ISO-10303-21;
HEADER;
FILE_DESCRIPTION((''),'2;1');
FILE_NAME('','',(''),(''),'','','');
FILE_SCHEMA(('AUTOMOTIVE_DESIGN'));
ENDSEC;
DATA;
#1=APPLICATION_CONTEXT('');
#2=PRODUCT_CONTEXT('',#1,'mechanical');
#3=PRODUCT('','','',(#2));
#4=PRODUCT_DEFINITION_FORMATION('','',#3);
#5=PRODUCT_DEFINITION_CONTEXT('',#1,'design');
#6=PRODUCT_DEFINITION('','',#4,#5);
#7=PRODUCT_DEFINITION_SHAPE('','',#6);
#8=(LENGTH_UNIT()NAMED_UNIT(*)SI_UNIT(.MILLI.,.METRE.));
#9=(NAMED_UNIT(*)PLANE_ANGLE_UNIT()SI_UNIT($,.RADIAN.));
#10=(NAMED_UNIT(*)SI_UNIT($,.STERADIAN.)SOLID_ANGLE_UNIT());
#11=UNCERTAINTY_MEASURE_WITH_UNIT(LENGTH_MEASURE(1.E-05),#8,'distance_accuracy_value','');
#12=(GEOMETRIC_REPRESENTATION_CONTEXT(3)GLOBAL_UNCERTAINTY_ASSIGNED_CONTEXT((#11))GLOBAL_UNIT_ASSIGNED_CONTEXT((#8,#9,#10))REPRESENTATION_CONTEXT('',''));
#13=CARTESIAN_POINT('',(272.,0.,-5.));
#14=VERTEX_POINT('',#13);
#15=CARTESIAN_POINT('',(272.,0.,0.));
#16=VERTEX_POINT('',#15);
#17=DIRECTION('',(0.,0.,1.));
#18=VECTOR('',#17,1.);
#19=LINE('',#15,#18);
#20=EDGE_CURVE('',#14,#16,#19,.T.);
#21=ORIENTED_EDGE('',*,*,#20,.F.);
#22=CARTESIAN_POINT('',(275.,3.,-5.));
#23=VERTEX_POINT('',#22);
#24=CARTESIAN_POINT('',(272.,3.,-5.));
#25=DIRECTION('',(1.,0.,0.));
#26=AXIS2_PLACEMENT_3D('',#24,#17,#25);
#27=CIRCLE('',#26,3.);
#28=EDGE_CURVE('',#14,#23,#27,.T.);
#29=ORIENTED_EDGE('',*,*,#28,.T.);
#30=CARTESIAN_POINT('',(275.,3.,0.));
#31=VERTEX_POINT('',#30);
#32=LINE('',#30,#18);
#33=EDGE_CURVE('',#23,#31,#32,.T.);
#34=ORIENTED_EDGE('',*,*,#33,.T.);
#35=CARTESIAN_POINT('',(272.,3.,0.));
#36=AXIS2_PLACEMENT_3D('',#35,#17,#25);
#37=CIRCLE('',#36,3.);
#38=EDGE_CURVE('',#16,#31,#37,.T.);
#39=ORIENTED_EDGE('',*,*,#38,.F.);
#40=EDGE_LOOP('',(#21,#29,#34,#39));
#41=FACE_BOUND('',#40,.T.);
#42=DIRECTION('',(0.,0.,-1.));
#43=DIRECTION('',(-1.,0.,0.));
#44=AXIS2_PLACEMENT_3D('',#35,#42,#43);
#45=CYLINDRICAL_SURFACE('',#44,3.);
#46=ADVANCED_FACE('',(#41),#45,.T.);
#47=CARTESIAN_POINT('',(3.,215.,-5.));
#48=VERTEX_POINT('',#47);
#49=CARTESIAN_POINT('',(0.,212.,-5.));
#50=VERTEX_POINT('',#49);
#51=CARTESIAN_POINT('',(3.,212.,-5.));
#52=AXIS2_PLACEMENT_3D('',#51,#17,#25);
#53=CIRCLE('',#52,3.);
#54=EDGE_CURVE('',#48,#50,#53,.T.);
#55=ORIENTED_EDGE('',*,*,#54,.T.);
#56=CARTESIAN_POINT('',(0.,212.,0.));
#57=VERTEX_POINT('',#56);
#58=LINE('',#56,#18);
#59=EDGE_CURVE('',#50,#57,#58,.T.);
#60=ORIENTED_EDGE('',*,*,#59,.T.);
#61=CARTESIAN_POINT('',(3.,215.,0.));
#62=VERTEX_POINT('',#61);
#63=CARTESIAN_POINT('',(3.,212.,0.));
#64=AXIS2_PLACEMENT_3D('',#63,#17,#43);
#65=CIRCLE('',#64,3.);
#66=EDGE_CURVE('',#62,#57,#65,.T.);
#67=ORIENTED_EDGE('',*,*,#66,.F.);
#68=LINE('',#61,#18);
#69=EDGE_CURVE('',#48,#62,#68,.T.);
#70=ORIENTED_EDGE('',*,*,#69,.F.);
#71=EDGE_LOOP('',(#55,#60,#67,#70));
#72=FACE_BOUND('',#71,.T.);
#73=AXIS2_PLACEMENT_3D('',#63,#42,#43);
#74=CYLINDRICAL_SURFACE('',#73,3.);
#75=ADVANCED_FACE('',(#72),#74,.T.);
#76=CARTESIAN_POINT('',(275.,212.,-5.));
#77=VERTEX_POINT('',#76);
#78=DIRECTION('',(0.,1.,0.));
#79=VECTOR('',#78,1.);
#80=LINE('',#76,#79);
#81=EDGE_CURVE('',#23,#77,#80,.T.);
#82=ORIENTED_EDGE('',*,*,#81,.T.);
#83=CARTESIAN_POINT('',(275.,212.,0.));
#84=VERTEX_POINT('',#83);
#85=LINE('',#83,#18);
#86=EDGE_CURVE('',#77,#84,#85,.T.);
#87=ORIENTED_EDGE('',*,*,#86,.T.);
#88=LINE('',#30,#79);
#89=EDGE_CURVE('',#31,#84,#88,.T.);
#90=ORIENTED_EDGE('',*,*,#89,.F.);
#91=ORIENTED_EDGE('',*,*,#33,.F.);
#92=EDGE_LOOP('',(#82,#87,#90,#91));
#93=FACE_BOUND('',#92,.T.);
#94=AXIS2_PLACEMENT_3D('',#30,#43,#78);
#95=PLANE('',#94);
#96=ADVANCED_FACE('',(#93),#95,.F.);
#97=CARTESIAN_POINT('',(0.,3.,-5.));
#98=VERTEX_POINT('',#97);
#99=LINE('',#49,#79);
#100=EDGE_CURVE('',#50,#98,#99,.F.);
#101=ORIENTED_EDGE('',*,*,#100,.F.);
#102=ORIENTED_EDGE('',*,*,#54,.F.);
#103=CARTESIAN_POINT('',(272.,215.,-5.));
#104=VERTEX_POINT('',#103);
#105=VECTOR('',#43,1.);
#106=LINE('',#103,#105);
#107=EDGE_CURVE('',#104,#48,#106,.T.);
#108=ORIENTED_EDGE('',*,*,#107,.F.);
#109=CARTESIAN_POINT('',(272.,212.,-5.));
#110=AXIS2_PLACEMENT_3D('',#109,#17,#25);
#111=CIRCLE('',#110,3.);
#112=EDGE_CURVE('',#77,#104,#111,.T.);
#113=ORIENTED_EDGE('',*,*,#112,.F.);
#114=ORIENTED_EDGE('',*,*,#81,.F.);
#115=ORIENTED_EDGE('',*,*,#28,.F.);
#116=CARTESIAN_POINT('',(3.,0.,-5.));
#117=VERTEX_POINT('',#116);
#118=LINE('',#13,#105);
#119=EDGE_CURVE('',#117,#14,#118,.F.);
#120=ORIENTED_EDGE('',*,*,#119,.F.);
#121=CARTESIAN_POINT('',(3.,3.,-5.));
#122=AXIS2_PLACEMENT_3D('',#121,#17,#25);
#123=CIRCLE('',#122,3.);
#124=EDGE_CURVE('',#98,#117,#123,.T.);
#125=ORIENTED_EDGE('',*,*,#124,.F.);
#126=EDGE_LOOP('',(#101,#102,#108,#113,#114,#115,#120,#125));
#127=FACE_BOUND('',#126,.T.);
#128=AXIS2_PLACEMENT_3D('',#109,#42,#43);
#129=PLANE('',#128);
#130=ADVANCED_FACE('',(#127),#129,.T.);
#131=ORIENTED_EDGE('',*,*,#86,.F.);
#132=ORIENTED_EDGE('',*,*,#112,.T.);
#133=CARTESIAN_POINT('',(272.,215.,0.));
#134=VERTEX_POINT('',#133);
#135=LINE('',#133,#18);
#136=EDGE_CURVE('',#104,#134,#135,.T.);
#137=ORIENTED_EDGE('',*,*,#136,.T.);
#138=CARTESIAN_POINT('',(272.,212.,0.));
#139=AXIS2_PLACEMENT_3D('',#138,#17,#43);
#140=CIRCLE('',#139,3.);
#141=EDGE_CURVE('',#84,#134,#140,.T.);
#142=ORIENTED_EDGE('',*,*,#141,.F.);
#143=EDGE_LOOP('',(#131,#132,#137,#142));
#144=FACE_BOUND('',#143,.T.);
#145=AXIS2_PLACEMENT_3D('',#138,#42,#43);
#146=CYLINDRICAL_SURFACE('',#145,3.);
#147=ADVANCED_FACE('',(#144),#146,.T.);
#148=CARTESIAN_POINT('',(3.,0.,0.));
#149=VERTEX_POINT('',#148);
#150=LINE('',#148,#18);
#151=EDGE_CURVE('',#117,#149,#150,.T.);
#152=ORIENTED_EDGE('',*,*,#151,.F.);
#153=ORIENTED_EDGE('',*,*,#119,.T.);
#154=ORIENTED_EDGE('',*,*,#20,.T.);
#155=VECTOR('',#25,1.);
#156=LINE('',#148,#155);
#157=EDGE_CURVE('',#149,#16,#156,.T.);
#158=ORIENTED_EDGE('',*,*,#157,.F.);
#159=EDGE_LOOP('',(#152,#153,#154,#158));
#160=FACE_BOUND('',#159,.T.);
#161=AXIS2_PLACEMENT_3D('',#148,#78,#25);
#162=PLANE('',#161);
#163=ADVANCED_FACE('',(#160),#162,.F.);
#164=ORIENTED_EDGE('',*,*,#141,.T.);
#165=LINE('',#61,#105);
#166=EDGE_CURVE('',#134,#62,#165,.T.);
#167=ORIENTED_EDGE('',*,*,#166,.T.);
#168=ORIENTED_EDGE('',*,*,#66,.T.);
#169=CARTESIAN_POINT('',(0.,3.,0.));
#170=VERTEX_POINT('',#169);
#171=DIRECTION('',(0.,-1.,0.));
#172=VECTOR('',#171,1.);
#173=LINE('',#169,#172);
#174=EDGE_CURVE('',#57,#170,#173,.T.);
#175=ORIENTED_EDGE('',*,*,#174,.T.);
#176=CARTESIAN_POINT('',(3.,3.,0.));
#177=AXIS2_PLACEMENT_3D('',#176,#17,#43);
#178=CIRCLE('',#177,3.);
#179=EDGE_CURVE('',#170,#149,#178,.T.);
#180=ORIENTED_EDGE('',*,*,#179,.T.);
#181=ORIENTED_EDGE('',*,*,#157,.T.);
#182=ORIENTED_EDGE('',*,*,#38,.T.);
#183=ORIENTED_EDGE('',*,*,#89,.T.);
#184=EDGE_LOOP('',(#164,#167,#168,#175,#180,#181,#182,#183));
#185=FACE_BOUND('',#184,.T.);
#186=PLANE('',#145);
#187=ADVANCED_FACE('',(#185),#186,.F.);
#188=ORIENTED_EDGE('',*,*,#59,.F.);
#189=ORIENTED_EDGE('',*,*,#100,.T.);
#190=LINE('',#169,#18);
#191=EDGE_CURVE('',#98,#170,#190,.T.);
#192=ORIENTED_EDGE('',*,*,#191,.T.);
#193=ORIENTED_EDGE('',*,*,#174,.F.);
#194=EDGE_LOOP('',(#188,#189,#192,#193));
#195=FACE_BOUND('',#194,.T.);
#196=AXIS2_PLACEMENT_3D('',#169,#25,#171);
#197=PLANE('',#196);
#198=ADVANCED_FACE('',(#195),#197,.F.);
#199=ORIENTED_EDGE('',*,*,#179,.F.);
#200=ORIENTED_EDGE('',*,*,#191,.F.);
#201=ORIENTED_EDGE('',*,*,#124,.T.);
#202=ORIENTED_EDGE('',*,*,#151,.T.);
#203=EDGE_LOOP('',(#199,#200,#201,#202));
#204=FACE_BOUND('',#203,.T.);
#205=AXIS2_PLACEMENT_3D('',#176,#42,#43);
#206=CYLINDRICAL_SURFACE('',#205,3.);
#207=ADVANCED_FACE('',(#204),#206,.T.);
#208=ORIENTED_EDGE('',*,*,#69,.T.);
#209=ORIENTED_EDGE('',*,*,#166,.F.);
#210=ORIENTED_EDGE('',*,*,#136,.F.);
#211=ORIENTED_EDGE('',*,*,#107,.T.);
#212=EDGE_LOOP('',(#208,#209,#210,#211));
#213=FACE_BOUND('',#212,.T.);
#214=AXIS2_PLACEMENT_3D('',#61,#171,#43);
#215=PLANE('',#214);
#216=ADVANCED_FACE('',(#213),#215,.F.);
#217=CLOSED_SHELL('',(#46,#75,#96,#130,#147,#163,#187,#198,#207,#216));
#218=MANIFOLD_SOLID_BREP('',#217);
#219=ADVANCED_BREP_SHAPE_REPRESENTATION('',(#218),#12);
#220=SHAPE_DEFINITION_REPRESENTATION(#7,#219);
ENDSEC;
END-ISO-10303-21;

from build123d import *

# Parameters (mm, degrees)
CONVERT_SOLID1_START = -5
CONVERT_SOLID1_DEPTH = 5


# Read off the part's stored shape, not the designer's step: Convert-Solid1
with BuildPart() as part:
    # Convert-Solid1 outline → Convert-Solid1 (new body)
    with BuildSketch(Plane.XY.offset(CONVERT_SOLID1_START)):
        with BuildLine():
            ThreePointArc((3, 215), (0.878679656, 214.121320344), (0, 212))
            Line((0, 212), (0, 3))
            ThreePointArc((0, 3), (0.878679656, 0.878679656), (3, 0))
            Line((3, 0), (272, 0))
            ThreePointArc((272, 0), (274.121320344, 0.878679656), (275, 3))
            Line((275, 3), (275, 212))
            ThreePointArc((275, 212), (274.121320344, 214.121320344), (272, 215))
            Line((272, 215), (3, 215))
        make_face()
    extrude(amount=CONVERT_SOLID1_DEPTH)


solid = part.part
